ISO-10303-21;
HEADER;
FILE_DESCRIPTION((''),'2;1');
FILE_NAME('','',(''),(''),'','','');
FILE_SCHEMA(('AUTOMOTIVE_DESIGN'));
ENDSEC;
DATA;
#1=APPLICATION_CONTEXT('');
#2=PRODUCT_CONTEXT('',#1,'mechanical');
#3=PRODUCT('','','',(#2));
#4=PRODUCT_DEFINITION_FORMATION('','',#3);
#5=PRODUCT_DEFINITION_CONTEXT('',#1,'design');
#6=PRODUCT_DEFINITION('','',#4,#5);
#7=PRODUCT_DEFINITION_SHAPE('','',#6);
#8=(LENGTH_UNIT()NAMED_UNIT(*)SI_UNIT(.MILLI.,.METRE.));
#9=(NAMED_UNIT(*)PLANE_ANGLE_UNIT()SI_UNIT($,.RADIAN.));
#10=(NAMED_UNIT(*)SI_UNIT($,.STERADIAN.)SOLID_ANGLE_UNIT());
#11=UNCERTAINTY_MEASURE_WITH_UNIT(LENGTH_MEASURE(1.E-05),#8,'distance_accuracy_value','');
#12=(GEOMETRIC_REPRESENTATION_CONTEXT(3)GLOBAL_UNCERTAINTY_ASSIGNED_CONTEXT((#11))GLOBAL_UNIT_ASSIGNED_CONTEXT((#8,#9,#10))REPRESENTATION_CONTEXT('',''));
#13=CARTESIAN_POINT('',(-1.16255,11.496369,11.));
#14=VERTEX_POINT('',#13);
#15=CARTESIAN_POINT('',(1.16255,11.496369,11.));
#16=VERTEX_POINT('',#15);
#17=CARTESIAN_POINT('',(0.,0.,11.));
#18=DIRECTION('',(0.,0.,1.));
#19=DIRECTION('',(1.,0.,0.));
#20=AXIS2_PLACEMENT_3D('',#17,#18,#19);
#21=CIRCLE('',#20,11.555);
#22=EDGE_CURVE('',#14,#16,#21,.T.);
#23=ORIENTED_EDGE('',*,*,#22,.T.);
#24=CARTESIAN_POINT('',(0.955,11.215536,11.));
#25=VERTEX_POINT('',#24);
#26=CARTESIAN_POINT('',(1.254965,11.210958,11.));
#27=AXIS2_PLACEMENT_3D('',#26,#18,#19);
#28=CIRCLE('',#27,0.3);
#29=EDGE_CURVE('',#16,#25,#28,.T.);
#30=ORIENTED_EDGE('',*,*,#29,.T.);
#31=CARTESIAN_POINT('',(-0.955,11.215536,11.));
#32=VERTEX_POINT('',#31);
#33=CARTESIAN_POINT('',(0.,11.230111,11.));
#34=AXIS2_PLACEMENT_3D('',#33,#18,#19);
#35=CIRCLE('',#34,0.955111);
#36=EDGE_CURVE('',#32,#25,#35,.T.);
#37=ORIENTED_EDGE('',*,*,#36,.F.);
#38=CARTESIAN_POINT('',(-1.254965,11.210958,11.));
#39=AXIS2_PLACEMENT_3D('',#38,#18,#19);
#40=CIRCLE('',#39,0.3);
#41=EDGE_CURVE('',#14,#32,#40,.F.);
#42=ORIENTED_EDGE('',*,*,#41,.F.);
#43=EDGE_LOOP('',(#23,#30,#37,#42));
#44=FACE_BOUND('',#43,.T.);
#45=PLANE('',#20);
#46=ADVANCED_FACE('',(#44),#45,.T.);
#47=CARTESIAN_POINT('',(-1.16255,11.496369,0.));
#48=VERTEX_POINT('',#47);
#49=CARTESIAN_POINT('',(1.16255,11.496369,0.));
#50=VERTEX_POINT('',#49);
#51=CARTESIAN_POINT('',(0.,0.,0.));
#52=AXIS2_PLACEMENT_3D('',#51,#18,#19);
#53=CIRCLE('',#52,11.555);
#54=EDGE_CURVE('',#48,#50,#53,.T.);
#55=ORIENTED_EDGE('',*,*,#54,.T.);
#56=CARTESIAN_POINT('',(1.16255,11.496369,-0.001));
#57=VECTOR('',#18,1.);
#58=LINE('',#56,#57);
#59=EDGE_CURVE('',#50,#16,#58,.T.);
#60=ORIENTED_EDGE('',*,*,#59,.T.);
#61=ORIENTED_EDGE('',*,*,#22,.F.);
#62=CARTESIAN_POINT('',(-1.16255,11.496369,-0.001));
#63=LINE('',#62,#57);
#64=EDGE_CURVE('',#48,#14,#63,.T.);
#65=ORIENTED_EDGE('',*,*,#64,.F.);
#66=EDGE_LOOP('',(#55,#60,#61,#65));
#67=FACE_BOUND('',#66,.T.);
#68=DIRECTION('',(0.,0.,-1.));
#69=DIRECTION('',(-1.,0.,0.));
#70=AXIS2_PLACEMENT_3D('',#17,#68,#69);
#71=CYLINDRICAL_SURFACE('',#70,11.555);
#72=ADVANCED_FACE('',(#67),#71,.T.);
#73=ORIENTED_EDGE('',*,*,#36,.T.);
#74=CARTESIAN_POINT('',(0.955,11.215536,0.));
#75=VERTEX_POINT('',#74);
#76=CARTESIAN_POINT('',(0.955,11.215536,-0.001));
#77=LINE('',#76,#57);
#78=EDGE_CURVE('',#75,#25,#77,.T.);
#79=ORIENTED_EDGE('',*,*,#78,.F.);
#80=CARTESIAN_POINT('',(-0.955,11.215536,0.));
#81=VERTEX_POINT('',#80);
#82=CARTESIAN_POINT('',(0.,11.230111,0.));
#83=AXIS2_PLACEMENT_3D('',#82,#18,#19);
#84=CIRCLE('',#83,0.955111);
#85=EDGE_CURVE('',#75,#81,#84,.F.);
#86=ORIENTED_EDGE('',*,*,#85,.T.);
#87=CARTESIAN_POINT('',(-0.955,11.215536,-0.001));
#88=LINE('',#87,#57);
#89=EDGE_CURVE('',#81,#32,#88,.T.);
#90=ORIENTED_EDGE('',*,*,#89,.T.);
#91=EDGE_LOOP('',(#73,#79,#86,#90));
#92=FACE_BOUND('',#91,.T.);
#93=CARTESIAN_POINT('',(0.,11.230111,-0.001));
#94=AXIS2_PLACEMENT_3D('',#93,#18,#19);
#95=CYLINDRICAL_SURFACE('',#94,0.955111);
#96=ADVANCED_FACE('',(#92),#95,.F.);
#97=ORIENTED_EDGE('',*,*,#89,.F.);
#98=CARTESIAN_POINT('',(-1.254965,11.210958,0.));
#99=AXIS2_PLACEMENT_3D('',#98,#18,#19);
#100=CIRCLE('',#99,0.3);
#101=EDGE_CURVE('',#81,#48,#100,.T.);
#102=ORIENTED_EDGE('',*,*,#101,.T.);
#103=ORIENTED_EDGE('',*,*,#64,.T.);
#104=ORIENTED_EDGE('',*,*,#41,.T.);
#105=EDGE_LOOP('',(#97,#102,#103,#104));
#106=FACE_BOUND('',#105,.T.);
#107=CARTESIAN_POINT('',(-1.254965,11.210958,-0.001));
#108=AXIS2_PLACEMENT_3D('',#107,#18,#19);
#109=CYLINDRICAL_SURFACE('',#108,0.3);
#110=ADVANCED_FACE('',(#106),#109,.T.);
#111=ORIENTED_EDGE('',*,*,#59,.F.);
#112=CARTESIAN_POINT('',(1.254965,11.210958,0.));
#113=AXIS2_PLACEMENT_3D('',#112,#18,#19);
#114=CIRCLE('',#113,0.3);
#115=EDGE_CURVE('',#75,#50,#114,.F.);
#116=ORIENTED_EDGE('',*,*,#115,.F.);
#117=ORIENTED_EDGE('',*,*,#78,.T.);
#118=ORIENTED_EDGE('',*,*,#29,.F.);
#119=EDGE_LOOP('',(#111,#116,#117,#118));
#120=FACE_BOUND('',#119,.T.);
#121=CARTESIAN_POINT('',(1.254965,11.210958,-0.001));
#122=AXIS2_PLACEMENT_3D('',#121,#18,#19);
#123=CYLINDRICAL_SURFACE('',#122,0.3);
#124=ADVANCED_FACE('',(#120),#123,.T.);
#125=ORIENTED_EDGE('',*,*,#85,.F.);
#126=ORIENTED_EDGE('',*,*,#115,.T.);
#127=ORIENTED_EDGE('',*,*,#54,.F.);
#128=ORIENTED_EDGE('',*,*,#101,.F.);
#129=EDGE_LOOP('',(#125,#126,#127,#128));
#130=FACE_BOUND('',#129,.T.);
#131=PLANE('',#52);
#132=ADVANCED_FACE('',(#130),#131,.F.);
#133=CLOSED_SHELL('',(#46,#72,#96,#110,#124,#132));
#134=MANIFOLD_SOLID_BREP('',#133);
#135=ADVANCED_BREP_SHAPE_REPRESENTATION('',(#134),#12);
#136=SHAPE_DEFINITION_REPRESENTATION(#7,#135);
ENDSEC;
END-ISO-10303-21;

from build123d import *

# Parameters (mm, degrees)
SKETCH_1_R          = 11.555
EXTRUDE_1_DEPTH     = 11
CUT_EXTRUDE_1_REACH = 21.699


with BuildPart() as part:
    # 草圖1 → 填料-伸長1 (new body)
    with BuildSketch(Plane.XY):
        Circle(SKETCH_1_R)
    extrude(amount=EXTRUDE_1_DEPTH)

    # 草圖2 → 除料-伸長1 (cut, up to next)
    with BuildSketch(Plane.XY.offset(11), mode=Mode.PRIVATE) as cut_extrude_1_sk1:
        with BuildLine():
            ThreePointArc((1.162550039, 11.496369097), (0, 11.555), (-1.162550039, 11.496369097))
            ThreePointArc((-1.162550039, 11.496369097), (-1.013703117, 11.389263051), (-0.955, 11.215536094))
            ThreePointArc((-0.955, 11.215536094), (0, 10.275), (0.955, 11.215536094))
            ThreePointArc((0.955, 11.215536094), (1.013703117, 11.389263051), (1.162550039, 11.496369097))
        make_face()
    cut_extrude_1_tool1 = extrude(cut_extrude_1_sk1.sketch, amount=-CUT_EXTRUDE_1_REACH, mode=Mode.PRIVATE) & part.part
    add(cut_extrude_1_tool1.solids().sort_by_distance((0, 10.99734, 11))[0], mode=Mode.SUBTRACT)


solid = part.part
